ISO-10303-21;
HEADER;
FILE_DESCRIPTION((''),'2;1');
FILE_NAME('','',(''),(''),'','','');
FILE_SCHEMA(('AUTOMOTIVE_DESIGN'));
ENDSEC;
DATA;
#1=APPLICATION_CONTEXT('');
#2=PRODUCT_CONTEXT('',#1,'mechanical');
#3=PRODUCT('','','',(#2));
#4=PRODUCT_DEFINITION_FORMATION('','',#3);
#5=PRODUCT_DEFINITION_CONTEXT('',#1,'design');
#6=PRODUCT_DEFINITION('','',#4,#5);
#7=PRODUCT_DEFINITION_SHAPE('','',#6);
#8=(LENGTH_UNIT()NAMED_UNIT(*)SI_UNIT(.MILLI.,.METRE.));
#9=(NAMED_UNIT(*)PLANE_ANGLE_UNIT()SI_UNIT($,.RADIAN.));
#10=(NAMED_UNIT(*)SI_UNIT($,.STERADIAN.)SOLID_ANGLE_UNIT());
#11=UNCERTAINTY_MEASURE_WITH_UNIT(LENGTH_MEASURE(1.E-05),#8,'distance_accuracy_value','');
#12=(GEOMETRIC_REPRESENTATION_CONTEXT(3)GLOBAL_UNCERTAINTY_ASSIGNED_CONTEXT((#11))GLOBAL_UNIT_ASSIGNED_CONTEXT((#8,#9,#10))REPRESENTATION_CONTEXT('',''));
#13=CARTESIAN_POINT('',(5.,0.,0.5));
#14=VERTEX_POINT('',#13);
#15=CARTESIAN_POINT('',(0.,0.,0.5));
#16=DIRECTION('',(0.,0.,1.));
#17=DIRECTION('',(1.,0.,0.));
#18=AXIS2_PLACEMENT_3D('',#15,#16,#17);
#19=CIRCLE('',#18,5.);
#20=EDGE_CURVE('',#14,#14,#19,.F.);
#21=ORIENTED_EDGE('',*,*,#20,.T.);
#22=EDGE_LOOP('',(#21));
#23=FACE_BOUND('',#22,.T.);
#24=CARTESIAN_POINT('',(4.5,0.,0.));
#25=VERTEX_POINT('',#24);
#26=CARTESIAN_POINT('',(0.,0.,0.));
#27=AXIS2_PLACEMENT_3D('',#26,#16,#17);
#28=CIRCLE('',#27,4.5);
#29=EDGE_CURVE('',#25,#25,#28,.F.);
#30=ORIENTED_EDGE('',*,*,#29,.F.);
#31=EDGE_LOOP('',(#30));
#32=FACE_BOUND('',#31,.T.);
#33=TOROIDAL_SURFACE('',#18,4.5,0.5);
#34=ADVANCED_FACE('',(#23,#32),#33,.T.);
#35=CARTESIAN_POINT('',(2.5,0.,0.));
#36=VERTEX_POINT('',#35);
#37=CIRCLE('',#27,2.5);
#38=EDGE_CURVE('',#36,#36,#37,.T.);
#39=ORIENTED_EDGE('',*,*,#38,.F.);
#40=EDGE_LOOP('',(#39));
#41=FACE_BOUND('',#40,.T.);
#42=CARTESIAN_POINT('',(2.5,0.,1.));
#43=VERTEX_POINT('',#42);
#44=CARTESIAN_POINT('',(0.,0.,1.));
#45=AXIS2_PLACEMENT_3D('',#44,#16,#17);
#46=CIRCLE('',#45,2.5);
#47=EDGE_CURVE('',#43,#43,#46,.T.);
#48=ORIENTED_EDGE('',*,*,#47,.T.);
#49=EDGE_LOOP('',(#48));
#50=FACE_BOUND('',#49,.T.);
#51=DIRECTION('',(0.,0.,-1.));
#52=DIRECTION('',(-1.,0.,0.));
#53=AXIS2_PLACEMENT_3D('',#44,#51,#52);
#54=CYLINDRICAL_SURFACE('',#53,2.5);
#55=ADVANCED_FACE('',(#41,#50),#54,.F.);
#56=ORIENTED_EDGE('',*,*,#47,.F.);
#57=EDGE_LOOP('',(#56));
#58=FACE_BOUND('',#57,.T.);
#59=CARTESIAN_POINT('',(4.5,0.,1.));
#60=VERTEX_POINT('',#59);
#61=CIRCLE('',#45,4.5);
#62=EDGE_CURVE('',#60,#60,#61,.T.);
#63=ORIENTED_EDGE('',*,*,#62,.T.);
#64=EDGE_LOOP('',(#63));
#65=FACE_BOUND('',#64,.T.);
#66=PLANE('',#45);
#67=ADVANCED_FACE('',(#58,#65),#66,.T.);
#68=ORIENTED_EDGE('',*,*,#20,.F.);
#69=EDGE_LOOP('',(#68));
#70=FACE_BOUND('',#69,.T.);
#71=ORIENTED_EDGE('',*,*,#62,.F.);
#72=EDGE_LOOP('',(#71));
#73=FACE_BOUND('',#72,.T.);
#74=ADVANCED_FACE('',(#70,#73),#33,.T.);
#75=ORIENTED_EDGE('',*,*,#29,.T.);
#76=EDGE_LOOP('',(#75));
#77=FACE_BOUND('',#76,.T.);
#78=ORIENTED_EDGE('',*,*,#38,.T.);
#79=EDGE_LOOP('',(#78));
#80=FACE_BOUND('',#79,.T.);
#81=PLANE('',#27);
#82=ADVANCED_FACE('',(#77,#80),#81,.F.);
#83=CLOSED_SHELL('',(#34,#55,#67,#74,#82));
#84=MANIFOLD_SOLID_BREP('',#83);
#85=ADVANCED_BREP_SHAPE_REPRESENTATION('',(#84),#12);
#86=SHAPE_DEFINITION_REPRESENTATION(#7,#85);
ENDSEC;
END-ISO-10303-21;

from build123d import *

# Parameters (mm, degrees)
SKETCH1_R           = 5
SKETCH1_R_2         = 2.5
BOSS_EXTRUDE1_DEPTH = 1
FILLET2_R           = 0.5


with BuildPart() as part:
    # Sketch1 → Boss-Extrude1 (new body)
    with BuildSketch(Plane.XY):
        Circle(SKETCH1_R)
        Circle(SKETCH1_R_2, mode=Mode.SUBTRACT)
    extrude(amount=BOSS_EXTRUDE1_DEPTH)

    # Fillet2
    fillet2_edges = [part.edges().sort_by_distance(p)[0] for p in [
        (-5, 0, 0),
        (-5, 0, 1),
    ]]
    fillet(fillet2_edges, radius=FILLET2_R - 0.0001)  # a hair under: the kernel refuses the full size


solid = part.part
